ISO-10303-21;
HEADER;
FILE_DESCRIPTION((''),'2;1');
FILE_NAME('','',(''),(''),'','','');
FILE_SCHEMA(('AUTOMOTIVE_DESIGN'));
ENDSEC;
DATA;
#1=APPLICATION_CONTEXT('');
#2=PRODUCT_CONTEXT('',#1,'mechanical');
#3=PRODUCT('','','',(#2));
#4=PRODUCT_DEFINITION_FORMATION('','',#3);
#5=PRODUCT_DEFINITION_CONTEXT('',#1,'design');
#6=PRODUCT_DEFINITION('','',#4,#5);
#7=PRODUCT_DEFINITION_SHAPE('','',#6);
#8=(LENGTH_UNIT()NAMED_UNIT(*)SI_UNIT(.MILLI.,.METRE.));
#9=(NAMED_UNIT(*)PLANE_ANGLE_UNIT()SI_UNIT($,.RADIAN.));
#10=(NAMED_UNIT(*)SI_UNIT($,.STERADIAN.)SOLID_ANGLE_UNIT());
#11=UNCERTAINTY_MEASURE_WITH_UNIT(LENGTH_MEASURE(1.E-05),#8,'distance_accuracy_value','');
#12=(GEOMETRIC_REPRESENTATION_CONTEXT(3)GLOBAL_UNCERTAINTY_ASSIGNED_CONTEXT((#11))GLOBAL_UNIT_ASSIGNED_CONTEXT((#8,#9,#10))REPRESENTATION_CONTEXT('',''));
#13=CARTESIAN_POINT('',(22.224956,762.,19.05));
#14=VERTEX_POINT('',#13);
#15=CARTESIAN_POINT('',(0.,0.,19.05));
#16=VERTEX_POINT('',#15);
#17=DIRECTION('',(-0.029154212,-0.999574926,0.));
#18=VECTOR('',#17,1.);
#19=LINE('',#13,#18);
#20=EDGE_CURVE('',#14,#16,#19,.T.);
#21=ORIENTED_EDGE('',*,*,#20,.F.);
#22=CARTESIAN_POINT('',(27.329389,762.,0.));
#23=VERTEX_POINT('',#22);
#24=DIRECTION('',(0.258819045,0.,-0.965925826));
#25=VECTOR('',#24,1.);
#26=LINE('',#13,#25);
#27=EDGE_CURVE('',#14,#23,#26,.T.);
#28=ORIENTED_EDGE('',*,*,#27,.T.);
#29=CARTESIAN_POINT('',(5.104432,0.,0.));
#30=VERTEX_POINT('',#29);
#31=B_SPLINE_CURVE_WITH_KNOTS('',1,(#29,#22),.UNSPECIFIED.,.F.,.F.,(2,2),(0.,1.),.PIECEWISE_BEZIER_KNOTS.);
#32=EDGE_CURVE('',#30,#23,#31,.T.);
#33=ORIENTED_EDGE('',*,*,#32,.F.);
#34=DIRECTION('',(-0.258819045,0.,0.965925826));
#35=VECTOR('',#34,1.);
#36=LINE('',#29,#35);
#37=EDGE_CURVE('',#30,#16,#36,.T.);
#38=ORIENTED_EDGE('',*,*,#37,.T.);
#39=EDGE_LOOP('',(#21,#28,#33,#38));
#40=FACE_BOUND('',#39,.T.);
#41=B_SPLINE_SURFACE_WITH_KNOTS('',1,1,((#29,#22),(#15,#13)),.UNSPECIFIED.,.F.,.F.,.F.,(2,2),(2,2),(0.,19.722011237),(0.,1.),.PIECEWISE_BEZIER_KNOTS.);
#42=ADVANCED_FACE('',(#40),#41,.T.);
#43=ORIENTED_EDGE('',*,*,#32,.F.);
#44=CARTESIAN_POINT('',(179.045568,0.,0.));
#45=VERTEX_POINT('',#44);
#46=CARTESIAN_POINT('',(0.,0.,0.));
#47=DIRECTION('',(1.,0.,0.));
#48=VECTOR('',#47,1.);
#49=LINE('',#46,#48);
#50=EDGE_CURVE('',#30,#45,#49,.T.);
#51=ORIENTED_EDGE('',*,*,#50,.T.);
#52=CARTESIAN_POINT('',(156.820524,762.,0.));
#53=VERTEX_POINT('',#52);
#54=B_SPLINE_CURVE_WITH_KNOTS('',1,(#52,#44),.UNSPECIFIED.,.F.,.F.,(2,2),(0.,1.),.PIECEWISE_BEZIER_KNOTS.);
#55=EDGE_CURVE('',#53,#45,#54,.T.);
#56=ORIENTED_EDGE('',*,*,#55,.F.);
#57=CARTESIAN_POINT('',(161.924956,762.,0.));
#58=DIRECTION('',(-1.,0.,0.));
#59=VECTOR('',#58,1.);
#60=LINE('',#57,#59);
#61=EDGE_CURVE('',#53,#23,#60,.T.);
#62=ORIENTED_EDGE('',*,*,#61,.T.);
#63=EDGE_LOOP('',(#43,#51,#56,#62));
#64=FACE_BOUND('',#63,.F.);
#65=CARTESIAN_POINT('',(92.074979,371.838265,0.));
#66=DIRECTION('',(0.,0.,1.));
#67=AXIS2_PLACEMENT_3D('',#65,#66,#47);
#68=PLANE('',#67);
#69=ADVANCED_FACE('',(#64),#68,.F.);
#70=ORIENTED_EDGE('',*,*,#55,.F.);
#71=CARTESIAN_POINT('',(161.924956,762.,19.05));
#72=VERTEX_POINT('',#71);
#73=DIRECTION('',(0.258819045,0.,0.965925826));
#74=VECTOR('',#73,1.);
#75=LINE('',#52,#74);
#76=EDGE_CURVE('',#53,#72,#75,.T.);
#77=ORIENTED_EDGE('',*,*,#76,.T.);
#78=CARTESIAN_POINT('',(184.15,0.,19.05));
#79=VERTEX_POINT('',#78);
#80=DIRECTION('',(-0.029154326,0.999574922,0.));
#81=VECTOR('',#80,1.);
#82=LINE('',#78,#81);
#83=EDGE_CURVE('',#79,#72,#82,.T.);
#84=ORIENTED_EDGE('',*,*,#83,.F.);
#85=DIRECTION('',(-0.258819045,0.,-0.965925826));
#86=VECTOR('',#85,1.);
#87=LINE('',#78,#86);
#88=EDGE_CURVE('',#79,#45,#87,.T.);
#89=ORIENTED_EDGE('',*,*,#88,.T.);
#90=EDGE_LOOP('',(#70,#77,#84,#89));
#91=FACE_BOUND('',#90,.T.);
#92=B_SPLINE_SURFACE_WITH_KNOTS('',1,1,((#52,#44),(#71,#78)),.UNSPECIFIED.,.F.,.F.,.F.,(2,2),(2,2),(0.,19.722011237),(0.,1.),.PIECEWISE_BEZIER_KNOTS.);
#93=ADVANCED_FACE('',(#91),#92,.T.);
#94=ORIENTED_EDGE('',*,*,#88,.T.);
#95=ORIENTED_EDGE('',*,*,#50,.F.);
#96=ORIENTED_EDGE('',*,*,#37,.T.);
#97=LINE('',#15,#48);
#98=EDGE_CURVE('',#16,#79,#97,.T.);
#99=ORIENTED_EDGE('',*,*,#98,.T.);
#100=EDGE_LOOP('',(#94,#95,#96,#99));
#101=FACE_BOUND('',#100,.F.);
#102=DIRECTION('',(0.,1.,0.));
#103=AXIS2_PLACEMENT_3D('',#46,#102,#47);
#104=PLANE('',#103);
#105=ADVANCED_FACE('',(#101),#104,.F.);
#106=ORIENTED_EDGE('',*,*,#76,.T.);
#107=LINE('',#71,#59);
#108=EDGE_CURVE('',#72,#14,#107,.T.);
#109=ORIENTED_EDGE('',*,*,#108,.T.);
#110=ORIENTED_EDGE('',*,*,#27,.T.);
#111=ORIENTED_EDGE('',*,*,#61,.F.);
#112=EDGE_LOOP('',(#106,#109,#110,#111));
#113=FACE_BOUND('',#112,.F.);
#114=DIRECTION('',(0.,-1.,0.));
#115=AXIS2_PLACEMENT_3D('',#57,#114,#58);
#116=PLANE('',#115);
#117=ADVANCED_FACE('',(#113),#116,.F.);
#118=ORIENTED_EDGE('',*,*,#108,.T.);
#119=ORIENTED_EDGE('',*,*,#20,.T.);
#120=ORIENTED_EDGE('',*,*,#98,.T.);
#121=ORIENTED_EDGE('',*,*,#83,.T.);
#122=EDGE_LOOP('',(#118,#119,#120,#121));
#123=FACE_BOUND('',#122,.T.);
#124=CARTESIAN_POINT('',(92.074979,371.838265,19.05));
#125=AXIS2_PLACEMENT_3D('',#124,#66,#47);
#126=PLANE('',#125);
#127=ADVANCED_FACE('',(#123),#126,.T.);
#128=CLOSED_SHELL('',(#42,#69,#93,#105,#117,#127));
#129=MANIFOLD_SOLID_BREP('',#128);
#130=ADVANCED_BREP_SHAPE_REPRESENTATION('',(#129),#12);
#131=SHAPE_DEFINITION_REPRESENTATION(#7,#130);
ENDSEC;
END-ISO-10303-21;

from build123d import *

# Parameters (mm, degrees)
F1_DEPTH = 19.05


with BuildPart() as f1:
    # F0 (on Top) → F1 (new body)
    with BuildSketch(Plane.XY):
        Polygon((22.2249564553, 762), (0, 0), (184.15, 0), (161.9249564553, 762), align=None)
    extrude(amount=F1_DEPTH)

    # F2 (on face) → F4 section 0
    with BuildSketch(Plane(origin=(0, 762, 0), x_dir=(-1, 0, 0), z_dir=(0, 1, 0))):
        Polygon((-156.8205243395, 0), (-161.9249564553, 19.05), (-161.9249564553, 0), align=None)
    # F3 (on face) → F4 section 1
    with BuildSketch(Plane.XZ):
        Polygon((184.15, 0), (184.15, 19.05), (179.0455678842, 0), align=None)
    loft(mode=Mode.SUBTRACT)

    # F5 (on face) → F7 section 0
    with BuildSketch(Plane.XZ):
        Polygon((0, 19.05), (0, 0), (5.1044321158, 0), align=None)
    # F6 (on face) → F7 section 1
    with BuildSketch(Plane(origin=(0, 762, 0), x_dir=(-1, 0, 0), z_dir=(0, 1, 0))):
        Polygon((-22.2249564553, 0), (-22.2249564553, 19.05), (-27.3293885711, 0), align=None)
    loft(mode=Mode.SUBTRACT)


solid = f1.part
